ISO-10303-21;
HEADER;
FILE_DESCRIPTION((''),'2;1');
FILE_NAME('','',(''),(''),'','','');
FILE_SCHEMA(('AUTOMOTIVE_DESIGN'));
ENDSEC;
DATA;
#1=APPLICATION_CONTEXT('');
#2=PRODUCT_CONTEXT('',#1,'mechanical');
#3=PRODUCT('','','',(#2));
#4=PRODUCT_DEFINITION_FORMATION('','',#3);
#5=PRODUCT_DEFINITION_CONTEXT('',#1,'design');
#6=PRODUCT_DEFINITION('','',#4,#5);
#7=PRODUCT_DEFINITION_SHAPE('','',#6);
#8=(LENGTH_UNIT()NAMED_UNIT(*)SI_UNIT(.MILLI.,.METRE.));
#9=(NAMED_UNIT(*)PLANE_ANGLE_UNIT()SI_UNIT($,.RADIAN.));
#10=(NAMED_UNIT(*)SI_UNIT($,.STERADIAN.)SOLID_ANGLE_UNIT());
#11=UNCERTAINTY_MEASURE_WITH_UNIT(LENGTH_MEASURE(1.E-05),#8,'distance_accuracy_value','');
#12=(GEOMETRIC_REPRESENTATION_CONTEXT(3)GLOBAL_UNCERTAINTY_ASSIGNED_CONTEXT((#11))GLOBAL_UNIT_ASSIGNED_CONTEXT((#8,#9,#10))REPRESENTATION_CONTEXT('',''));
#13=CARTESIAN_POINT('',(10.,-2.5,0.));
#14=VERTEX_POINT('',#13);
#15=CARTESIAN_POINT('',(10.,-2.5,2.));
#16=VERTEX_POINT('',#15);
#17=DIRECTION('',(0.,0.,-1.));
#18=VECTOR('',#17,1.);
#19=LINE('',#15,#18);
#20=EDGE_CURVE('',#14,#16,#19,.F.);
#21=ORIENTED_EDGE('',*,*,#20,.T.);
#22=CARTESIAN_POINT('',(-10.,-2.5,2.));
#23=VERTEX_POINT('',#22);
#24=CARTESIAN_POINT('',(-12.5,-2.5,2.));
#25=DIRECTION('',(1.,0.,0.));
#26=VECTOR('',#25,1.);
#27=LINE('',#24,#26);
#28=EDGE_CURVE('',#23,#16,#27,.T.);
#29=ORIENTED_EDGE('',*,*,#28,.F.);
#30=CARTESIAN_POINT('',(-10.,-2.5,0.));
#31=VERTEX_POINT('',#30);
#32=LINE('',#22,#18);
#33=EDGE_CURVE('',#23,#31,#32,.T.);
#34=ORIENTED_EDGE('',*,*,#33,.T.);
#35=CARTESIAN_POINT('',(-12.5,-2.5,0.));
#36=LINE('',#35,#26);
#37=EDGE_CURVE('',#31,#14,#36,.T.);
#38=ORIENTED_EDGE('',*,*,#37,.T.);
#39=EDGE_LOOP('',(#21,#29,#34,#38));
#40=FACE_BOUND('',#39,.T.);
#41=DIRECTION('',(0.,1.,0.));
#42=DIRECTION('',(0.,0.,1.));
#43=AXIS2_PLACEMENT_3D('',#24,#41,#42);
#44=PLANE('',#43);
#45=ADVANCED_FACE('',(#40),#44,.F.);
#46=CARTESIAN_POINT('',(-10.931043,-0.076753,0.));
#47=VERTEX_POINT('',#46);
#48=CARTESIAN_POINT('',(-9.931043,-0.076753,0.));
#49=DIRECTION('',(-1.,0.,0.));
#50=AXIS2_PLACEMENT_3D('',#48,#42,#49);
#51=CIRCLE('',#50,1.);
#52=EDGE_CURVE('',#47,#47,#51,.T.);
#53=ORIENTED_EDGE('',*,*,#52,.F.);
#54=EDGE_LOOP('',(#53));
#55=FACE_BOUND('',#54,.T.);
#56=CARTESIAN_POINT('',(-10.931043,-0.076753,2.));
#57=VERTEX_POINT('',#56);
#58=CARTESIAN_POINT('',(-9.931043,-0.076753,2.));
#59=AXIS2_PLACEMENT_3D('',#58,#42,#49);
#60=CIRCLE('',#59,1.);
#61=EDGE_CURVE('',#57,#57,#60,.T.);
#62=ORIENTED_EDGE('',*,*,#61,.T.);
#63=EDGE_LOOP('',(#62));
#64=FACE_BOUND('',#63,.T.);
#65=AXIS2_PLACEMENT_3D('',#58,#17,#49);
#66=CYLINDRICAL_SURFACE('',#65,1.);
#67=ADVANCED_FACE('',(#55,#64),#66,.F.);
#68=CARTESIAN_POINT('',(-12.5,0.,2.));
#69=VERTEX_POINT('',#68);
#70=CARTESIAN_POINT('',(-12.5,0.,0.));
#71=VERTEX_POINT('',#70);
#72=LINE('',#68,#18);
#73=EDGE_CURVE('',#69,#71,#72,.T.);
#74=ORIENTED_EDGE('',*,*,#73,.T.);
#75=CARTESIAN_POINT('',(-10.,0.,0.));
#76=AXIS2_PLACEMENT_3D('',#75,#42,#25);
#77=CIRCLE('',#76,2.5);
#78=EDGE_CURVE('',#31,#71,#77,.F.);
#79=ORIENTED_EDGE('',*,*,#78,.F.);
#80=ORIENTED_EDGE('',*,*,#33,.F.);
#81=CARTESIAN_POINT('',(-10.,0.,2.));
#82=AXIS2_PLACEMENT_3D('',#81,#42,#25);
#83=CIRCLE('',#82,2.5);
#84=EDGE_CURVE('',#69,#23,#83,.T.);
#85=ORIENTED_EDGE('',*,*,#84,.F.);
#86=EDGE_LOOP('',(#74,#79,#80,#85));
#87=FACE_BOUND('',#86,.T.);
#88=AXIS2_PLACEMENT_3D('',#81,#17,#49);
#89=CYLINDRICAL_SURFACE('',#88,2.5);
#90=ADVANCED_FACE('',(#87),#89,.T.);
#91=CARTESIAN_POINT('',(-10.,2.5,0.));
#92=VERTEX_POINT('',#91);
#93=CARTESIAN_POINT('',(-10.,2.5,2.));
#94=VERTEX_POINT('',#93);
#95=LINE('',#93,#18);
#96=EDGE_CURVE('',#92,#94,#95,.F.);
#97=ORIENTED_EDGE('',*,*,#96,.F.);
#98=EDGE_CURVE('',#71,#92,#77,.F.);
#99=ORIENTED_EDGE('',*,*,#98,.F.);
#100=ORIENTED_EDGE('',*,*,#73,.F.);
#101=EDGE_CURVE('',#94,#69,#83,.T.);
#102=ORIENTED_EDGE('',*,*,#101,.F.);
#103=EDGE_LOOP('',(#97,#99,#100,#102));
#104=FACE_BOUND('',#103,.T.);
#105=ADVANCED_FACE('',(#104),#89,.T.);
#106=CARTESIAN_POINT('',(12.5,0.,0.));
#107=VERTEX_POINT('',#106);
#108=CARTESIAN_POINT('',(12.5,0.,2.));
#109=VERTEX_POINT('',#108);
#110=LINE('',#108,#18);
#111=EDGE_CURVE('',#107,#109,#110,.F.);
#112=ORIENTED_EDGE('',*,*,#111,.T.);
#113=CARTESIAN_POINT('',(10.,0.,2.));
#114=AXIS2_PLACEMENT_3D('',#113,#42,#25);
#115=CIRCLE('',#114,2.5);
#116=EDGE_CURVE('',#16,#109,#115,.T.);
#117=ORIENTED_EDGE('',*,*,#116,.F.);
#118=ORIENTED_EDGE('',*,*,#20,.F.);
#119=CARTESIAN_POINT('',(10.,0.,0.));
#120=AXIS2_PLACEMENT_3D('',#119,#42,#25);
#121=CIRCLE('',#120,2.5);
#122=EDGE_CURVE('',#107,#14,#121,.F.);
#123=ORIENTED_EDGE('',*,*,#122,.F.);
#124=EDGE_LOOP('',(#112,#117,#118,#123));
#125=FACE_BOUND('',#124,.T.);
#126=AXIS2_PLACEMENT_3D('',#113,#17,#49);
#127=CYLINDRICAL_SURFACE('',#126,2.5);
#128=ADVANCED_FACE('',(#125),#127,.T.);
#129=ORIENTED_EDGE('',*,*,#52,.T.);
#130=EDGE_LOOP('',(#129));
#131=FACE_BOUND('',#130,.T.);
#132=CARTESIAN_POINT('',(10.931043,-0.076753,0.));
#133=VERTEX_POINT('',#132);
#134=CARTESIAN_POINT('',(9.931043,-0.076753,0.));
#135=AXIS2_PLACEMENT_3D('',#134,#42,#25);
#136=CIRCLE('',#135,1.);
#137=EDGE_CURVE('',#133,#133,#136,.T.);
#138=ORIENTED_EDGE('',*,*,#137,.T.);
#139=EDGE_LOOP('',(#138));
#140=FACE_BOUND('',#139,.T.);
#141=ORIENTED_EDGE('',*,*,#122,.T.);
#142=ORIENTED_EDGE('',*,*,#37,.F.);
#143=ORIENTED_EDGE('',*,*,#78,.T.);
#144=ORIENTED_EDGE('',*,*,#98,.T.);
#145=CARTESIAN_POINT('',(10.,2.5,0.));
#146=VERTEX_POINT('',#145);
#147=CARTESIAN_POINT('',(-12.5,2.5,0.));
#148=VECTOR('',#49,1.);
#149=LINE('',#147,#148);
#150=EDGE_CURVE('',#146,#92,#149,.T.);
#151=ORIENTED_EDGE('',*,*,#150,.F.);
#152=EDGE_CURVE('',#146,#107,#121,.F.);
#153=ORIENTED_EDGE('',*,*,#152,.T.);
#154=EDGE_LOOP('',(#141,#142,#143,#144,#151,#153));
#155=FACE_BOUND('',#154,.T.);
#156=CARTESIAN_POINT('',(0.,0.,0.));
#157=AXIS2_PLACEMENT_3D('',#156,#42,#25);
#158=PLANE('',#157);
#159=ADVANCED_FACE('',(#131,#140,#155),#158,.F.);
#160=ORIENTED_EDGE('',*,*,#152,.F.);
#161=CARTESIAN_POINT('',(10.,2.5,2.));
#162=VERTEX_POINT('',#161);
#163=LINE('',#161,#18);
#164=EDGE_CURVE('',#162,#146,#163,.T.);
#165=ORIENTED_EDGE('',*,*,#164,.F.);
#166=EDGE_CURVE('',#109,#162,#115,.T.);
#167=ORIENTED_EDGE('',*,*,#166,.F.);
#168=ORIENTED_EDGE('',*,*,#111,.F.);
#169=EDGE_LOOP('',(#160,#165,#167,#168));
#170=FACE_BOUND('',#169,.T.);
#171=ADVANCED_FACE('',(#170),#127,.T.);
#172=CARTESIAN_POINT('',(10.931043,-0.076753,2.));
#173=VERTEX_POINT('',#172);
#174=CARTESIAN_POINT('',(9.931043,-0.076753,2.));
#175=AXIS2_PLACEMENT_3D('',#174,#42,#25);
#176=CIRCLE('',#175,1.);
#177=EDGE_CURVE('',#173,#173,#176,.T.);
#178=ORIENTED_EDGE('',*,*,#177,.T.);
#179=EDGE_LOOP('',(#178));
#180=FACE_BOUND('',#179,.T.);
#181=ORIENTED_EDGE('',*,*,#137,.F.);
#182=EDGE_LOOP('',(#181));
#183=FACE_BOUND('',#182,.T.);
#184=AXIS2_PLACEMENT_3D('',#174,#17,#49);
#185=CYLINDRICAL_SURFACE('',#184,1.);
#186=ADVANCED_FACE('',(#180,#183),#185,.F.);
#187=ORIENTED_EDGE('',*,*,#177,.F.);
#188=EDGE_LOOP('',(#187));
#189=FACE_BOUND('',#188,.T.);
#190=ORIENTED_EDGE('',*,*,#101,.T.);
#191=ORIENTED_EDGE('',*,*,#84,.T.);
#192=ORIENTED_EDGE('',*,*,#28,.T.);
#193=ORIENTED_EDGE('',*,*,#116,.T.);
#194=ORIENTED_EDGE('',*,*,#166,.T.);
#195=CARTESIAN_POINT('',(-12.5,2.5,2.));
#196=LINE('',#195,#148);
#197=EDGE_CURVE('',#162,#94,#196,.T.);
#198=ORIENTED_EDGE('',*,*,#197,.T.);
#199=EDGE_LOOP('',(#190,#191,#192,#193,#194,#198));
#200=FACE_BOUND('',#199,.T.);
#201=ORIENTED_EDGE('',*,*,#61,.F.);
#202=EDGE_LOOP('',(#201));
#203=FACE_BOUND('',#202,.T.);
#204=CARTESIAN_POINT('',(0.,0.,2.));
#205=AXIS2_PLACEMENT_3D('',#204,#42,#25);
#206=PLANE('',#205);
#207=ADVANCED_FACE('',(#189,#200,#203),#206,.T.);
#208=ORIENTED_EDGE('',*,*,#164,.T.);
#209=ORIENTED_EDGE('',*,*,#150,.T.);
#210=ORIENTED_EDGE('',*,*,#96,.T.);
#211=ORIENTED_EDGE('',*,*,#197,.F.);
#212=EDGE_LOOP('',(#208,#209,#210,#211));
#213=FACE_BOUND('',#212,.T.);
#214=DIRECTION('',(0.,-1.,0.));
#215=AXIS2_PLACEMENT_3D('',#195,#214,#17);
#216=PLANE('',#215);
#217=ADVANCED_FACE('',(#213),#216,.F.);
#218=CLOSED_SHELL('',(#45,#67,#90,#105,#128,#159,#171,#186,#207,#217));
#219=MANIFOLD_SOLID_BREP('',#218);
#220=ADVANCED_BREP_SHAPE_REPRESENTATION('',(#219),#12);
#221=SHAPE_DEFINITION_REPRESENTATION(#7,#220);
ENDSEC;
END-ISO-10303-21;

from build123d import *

# Parameters (mm, degrees)
SKETCH1_W           = 25
SKETCH1_H           = 5
SKETCH1_R           = 1
BOSS_EXTRUDE1_DEPTH = 2
FILLET1_R           = 2.5


with BuildPart() as part:
    # Sketch1 → Boss-Extrude1 (new body)
    with BuildSketch(Plane.XY):
        Rectangle(SKETCH1_W, SKETCH1_H)
        with Locations((9.931042695, -0.076752974)):
            Circle(SKETCH1_R, mode=Mode.SUBTRACT)
        with Locations(Location((-9.931042695, -0.076752974, 0), (0, 0, 180))):
            Circle(SKETCH1_R, mode=Mode.SUBTRACT)
    extrude(amount=BOSS_EXTRUDE1_DEPTH)

    # Fillet1
    fillet1_edges = [part.edges().sort_by_distance(p)[0] for p in [
        (-12.5, -2.5, 1),
        (-12.5, 2.5, 1),
        (12.5, -2.5, 1),
        (12.5, 2.5, 1),
    ]]
    fillet(fillet1_edges, radius=FILLET1_R - 0.0001)  # a hair under: the kernel refuses the full size


solid = part.part
